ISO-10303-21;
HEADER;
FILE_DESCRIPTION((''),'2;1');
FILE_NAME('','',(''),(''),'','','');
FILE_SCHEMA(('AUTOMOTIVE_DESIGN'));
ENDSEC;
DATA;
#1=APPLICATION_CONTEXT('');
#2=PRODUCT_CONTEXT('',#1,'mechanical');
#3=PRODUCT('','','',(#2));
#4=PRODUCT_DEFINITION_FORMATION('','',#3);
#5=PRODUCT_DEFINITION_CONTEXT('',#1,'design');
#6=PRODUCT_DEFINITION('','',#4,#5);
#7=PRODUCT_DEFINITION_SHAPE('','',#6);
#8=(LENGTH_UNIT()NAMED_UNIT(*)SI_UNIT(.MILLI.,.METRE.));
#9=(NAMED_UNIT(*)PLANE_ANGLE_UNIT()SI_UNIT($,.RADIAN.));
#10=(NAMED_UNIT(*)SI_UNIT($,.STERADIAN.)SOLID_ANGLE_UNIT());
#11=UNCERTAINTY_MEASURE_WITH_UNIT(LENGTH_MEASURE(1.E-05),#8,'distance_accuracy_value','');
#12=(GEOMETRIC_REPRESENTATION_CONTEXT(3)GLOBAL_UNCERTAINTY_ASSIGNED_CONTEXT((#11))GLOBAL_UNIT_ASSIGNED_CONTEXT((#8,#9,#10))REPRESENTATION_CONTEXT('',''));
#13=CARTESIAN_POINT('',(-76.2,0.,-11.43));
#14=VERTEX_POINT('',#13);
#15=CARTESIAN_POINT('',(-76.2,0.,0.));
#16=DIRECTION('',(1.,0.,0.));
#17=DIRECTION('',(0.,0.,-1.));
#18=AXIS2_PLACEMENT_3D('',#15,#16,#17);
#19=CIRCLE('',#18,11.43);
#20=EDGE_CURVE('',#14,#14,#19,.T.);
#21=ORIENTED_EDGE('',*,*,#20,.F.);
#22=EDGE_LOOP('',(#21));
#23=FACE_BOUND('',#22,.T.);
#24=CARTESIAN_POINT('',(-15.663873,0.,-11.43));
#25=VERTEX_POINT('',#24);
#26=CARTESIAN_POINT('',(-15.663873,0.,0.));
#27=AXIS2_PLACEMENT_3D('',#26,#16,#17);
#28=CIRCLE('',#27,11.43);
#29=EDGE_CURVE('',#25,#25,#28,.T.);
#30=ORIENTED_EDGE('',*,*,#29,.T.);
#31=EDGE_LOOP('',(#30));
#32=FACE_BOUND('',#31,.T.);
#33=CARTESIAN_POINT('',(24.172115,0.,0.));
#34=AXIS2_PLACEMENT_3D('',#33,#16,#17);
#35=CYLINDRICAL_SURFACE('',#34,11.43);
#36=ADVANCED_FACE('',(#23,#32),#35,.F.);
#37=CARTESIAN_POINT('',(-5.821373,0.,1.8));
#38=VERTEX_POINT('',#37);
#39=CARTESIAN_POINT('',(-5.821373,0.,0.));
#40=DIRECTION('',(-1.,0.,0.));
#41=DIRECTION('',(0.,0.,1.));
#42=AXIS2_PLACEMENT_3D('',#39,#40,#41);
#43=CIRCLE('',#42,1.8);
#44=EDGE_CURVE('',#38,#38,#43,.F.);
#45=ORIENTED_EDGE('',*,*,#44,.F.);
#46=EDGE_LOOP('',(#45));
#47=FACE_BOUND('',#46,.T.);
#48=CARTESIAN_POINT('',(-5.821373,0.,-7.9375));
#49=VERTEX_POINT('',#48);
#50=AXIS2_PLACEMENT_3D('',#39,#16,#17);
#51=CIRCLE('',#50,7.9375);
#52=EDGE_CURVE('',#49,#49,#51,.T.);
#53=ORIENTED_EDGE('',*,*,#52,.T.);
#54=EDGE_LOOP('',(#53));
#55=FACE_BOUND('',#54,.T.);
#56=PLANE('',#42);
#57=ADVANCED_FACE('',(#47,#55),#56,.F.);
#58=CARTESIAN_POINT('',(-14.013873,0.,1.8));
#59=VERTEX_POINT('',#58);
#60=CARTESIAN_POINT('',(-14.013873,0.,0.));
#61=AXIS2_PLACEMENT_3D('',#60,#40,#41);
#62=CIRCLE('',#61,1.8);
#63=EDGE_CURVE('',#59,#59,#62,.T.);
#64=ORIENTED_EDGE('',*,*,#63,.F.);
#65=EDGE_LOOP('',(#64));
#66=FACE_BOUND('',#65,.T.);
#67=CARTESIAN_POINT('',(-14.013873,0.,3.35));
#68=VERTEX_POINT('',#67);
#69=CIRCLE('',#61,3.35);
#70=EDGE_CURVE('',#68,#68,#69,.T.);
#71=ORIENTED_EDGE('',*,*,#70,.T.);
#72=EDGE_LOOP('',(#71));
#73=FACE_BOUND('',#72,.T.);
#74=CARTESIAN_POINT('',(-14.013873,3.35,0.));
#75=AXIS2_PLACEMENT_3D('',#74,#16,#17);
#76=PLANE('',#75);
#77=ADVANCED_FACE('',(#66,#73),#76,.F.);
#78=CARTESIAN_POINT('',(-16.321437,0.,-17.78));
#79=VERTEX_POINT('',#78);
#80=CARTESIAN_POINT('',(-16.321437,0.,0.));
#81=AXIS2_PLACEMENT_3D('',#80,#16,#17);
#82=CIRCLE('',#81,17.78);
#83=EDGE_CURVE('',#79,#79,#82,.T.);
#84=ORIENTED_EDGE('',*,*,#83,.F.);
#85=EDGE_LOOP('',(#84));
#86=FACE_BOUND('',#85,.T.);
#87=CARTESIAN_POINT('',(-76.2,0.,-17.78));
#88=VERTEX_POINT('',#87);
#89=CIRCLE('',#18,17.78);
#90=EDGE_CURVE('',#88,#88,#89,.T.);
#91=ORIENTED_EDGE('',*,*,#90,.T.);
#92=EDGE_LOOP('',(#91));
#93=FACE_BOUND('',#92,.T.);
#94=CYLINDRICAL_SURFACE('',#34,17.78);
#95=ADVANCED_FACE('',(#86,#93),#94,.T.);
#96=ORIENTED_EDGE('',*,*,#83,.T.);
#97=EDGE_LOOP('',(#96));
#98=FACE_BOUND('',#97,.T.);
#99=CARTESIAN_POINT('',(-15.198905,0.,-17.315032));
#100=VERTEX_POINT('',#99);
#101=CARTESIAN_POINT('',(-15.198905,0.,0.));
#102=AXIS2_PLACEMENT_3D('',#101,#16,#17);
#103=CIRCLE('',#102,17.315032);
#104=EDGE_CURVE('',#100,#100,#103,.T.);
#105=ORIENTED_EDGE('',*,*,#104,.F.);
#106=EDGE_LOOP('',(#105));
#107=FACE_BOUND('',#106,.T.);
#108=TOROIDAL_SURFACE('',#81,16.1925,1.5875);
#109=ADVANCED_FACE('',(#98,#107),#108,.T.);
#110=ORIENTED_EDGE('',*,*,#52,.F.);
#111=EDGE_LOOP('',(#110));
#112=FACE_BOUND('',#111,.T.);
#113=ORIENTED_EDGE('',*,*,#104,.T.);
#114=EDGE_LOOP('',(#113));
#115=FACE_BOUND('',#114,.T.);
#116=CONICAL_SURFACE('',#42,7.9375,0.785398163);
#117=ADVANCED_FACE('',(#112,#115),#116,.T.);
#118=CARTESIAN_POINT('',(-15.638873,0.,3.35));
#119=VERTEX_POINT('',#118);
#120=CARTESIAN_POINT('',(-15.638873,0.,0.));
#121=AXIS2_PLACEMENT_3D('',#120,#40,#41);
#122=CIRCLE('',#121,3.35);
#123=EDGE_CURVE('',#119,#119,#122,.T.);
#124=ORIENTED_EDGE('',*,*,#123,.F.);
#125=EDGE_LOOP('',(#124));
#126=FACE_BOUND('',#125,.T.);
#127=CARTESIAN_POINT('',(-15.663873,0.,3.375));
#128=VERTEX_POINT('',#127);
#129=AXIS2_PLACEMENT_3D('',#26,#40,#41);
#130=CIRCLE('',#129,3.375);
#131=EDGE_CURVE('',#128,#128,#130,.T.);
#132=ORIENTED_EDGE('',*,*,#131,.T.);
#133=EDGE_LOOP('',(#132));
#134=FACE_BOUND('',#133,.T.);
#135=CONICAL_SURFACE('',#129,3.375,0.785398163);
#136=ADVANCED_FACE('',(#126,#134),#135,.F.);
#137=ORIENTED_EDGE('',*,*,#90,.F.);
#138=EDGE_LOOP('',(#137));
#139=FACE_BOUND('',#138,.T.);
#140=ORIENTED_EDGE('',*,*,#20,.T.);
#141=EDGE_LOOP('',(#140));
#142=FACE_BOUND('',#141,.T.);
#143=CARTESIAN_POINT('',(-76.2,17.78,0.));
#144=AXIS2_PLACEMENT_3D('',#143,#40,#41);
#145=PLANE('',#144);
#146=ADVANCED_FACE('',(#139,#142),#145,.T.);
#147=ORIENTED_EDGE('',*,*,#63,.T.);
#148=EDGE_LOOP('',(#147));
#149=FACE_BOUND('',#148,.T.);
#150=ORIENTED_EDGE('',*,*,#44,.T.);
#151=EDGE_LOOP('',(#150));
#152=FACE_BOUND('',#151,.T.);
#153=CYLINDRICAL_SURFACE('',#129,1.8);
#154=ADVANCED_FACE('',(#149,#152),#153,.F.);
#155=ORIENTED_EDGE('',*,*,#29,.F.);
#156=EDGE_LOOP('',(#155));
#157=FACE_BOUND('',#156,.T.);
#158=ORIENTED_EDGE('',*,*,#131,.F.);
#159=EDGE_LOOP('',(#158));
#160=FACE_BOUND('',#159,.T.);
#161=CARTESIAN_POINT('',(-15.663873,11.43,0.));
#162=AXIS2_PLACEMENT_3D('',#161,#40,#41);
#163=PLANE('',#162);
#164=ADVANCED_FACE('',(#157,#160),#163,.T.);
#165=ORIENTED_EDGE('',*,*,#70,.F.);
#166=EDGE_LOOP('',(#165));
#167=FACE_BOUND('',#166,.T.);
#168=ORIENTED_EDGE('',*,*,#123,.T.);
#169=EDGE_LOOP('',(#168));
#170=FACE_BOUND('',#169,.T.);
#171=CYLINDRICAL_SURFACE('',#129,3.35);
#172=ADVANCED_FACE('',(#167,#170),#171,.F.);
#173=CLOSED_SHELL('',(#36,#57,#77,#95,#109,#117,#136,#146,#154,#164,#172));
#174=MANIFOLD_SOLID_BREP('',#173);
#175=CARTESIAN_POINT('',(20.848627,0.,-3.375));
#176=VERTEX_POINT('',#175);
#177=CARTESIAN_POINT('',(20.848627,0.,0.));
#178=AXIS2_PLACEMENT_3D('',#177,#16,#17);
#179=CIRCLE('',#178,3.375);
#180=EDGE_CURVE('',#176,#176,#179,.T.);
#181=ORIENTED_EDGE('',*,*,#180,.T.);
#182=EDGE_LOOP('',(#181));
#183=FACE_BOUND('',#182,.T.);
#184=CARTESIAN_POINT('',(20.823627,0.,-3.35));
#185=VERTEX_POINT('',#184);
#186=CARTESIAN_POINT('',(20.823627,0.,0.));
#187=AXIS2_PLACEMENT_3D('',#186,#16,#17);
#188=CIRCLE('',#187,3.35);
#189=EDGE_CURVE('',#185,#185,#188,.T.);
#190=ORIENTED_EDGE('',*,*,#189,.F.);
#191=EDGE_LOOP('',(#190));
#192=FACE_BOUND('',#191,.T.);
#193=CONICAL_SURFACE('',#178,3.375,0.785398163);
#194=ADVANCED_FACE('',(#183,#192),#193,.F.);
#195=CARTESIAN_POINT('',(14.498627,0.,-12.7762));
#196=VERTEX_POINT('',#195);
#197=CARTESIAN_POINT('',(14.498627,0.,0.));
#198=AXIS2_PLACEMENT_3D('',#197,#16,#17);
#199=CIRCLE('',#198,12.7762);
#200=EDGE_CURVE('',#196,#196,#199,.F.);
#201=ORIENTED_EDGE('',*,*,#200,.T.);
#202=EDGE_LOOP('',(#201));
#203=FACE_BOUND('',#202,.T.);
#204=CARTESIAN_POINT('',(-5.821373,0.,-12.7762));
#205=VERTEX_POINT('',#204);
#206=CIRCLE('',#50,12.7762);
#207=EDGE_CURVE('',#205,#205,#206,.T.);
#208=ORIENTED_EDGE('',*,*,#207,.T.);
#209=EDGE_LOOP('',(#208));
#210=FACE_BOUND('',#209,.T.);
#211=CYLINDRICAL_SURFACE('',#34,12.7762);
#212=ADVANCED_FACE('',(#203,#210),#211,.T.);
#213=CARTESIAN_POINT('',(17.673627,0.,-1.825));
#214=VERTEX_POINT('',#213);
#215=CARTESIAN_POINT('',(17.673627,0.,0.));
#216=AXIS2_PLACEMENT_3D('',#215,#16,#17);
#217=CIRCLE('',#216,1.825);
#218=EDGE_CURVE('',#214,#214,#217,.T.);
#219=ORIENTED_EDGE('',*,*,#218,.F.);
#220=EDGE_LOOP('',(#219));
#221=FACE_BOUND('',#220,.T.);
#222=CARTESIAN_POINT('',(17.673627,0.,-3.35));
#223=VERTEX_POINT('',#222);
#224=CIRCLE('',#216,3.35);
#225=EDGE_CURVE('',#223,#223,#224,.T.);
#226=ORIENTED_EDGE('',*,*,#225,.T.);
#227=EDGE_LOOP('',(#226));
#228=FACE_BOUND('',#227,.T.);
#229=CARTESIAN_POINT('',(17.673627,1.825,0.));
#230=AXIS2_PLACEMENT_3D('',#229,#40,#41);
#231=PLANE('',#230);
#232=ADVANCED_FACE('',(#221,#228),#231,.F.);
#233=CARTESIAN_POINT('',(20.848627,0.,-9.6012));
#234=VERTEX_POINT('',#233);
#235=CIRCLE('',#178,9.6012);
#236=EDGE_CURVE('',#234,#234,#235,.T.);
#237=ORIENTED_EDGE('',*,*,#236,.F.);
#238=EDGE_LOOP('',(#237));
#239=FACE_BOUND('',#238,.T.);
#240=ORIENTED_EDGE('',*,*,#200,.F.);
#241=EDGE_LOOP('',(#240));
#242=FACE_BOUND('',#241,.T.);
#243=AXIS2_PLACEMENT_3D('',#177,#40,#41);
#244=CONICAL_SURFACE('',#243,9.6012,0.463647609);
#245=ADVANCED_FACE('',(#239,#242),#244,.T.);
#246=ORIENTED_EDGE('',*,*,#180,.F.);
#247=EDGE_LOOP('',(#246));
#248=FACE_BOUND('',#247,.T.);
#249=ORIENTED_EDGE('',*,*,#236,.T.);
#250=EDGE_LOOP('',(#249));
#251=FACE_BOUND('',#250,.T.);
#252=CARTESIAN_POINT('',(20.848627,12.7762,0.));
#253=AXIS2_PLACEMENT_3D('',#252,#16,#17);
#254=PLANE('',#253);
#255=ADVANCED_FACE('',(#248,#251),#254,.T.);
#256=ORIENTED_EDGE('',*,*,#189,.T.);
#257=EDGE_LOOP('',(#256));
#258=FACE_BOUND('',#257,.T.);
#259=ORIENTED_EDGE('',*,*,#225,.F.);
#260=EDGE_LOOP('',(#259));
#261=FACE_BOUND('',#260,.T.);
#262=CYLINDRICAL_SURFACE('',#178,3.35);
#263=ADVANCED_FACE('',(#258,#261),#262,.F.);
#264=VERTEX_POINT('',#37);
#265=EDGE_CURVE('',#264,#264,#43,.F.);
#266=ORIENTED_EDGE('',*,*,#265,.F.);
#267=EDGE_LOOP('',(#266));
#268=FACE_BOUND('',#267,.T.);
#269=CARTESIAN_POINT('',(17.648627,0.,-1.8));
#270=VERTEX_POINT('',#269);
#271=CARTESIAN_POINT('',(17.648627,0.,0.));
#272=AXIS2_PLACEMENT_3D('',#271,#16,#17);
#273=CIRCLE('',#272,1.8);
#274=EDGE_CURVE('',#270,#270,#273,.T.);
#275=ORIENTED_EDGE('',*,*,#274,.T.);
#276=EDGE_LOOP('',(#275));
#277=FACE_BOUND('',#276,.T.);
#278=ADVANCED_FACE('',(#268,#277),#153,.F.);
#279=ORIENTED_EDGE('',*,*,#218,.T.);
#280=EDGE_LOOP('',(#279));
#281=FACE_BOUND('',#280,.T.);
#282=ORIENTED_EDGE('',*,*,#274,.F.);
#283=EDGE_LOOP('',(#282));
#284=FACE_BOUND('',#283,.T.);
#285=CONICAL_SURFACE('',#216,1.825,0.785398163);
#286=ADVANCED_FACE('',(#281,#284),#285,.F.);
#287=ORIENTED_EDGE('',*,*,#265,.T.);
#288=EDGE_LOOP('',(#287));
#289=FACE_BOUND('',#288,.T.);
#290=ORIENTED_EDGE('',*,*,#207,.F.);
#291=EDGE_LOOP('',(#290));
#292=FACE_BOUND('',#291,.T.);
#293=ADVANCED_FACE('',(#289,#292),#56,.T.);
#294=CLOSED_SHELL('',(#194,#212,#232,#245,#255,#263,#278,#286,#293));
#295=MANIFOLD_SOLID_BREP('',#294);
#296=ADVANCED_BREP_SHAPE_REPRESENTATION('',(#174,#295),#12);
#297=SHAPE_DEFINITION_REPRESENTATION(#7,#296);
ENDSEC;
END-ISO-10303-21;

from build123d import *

# Parameters (mm, degrees)
SKETCH10_R          = 12.7762
BOSS_EXTRUDE1_DEPTH = 19.05
CHAMFER1_SIZE       = 6.35
CHAMFER1_SIZE2      = 3.175


with BuildPart() as part:
    # Sketch3 → Revolve1 (revolve)
    with BuildSketch(Plane.XY):
        with BuildLine():
            Line((-76.2, 17.78), (-76.2, 11.43))
            Line((-76.2, 11.43), (-15.663873033, 11.43))
            Line((-15.663873033, 11.43), (-15.663873033, 0))
            Line((-15.663873033, 0), (-5.821373033, 0))
            Line((-5.821373033, 0), (1.798626967, 0))
            Line((1.798626967, 0), (20.848626967, 0))
            Line((20.848626967, 0), (20.848626967, 12.7762))
            Line((20.848626967, 12.7762), (1.798626967, 12.7762))
            Line((1.798626967, 12.7762), (-5.821373033, 12.7762))
            Line((-5.821373033, 12.7762), (-5.821373033, 7.9375))
            Line((-5.821373033, 7.9375), (-15.198905048, 17.315032015))
            ThreePointArc((-15.198905048, 17.315032015), (-15.713927115, 17.659158758), (-16.321437064, 17.78))
            Line((-16.321437064, 17.78), (-76.2, 17.78))
        make_face()
    revolve(axis=Axis((24.172114646, 0, 0), (-1, 0, 0)))

    # Sketch6 → CBORE for M3 SBHCS1 (revolve, cut)
    with BuildSketch(Plane(origin=(-15.663873033, 0, 0), x_dir=(0, 0, 1), z_dir=(0, 1, 0))):
        Polygon((0, 0), (0, 36.5125), (1.8, 36.5125), (1.8, 1.65), (3.35, 1.65), (3.35, 0.025), (3.375, 0), align=None)
    revolve(axis=Axis((-22.013873033, 0, 0), (1, 0, 0)), mode=Mode.SUBTRACT)

    # Sketch10 → Boss-Extrude1 (add)
    with BuildSketch(Plane(origin=(0, 0, 0), x_dir=(0, 0, -1), z_dir=(1, 0, 0))):
        Circle(SKETCH10_R)
    extrude(amount=BOSS_EXTRUDE1_DEPTH)

    # Chamfer1
    chamfer1_edges = [part.edges().sort_by_distance(p)[0] for p in [
        (20.848626967, -12.7762, 0),
    ]]
    chamfer1_side = [part.faces().sort_by_distance(p)[0] for p in [
        (7.513626967, -12.7762, 0),
    ]]
    chamfer(chamfer1_edges, length=CHAMFER1_SIZE, length2=CHAMFER1_SIZE2, reference=chamfer1_side[0])

    # Sketch12 → CBORE for M3 SBHCS3 (revolve, cut)
    with BuildSketch(Plane(origin=(20.848626967, 0, 0), x_dir=(0, 0, -1), z_dir=(0, 1, 0))):
        Polygon((0, 0), (0, 97.048626967), (1.8, 97.048626967), (1.8, 3.2), (1.825, 3.175), (3.35, 3.175), (3.35, 0.025), (3.375, 0), align=None)
    revolve(axis=Axis((27.198626967, 0, 0), (-1, 0, 0)), mode=Mode.SUBTRACT)


with BuildPart() as body_2:
    # split 2: the piece on the far side of the plane
    add(part.part)
    split(bisect_by=Plane(origin=(-5.821373033, 0, 0), x_dir=(0, 0, -1), z_dir=(-1, 0, 0)), keep=Keep.BOTTOM)


with BuildPart() as part_1:
    add(part.part)

    # split 2
    split(bisect_by=Plane(origin=(-5.821373033, 0, 0), x_dir=(0, 0, -1), z_dir=(-1, 0, 0)), keep=Keep.TOP)


solid = Compound([body_2.part, part_1.part])
